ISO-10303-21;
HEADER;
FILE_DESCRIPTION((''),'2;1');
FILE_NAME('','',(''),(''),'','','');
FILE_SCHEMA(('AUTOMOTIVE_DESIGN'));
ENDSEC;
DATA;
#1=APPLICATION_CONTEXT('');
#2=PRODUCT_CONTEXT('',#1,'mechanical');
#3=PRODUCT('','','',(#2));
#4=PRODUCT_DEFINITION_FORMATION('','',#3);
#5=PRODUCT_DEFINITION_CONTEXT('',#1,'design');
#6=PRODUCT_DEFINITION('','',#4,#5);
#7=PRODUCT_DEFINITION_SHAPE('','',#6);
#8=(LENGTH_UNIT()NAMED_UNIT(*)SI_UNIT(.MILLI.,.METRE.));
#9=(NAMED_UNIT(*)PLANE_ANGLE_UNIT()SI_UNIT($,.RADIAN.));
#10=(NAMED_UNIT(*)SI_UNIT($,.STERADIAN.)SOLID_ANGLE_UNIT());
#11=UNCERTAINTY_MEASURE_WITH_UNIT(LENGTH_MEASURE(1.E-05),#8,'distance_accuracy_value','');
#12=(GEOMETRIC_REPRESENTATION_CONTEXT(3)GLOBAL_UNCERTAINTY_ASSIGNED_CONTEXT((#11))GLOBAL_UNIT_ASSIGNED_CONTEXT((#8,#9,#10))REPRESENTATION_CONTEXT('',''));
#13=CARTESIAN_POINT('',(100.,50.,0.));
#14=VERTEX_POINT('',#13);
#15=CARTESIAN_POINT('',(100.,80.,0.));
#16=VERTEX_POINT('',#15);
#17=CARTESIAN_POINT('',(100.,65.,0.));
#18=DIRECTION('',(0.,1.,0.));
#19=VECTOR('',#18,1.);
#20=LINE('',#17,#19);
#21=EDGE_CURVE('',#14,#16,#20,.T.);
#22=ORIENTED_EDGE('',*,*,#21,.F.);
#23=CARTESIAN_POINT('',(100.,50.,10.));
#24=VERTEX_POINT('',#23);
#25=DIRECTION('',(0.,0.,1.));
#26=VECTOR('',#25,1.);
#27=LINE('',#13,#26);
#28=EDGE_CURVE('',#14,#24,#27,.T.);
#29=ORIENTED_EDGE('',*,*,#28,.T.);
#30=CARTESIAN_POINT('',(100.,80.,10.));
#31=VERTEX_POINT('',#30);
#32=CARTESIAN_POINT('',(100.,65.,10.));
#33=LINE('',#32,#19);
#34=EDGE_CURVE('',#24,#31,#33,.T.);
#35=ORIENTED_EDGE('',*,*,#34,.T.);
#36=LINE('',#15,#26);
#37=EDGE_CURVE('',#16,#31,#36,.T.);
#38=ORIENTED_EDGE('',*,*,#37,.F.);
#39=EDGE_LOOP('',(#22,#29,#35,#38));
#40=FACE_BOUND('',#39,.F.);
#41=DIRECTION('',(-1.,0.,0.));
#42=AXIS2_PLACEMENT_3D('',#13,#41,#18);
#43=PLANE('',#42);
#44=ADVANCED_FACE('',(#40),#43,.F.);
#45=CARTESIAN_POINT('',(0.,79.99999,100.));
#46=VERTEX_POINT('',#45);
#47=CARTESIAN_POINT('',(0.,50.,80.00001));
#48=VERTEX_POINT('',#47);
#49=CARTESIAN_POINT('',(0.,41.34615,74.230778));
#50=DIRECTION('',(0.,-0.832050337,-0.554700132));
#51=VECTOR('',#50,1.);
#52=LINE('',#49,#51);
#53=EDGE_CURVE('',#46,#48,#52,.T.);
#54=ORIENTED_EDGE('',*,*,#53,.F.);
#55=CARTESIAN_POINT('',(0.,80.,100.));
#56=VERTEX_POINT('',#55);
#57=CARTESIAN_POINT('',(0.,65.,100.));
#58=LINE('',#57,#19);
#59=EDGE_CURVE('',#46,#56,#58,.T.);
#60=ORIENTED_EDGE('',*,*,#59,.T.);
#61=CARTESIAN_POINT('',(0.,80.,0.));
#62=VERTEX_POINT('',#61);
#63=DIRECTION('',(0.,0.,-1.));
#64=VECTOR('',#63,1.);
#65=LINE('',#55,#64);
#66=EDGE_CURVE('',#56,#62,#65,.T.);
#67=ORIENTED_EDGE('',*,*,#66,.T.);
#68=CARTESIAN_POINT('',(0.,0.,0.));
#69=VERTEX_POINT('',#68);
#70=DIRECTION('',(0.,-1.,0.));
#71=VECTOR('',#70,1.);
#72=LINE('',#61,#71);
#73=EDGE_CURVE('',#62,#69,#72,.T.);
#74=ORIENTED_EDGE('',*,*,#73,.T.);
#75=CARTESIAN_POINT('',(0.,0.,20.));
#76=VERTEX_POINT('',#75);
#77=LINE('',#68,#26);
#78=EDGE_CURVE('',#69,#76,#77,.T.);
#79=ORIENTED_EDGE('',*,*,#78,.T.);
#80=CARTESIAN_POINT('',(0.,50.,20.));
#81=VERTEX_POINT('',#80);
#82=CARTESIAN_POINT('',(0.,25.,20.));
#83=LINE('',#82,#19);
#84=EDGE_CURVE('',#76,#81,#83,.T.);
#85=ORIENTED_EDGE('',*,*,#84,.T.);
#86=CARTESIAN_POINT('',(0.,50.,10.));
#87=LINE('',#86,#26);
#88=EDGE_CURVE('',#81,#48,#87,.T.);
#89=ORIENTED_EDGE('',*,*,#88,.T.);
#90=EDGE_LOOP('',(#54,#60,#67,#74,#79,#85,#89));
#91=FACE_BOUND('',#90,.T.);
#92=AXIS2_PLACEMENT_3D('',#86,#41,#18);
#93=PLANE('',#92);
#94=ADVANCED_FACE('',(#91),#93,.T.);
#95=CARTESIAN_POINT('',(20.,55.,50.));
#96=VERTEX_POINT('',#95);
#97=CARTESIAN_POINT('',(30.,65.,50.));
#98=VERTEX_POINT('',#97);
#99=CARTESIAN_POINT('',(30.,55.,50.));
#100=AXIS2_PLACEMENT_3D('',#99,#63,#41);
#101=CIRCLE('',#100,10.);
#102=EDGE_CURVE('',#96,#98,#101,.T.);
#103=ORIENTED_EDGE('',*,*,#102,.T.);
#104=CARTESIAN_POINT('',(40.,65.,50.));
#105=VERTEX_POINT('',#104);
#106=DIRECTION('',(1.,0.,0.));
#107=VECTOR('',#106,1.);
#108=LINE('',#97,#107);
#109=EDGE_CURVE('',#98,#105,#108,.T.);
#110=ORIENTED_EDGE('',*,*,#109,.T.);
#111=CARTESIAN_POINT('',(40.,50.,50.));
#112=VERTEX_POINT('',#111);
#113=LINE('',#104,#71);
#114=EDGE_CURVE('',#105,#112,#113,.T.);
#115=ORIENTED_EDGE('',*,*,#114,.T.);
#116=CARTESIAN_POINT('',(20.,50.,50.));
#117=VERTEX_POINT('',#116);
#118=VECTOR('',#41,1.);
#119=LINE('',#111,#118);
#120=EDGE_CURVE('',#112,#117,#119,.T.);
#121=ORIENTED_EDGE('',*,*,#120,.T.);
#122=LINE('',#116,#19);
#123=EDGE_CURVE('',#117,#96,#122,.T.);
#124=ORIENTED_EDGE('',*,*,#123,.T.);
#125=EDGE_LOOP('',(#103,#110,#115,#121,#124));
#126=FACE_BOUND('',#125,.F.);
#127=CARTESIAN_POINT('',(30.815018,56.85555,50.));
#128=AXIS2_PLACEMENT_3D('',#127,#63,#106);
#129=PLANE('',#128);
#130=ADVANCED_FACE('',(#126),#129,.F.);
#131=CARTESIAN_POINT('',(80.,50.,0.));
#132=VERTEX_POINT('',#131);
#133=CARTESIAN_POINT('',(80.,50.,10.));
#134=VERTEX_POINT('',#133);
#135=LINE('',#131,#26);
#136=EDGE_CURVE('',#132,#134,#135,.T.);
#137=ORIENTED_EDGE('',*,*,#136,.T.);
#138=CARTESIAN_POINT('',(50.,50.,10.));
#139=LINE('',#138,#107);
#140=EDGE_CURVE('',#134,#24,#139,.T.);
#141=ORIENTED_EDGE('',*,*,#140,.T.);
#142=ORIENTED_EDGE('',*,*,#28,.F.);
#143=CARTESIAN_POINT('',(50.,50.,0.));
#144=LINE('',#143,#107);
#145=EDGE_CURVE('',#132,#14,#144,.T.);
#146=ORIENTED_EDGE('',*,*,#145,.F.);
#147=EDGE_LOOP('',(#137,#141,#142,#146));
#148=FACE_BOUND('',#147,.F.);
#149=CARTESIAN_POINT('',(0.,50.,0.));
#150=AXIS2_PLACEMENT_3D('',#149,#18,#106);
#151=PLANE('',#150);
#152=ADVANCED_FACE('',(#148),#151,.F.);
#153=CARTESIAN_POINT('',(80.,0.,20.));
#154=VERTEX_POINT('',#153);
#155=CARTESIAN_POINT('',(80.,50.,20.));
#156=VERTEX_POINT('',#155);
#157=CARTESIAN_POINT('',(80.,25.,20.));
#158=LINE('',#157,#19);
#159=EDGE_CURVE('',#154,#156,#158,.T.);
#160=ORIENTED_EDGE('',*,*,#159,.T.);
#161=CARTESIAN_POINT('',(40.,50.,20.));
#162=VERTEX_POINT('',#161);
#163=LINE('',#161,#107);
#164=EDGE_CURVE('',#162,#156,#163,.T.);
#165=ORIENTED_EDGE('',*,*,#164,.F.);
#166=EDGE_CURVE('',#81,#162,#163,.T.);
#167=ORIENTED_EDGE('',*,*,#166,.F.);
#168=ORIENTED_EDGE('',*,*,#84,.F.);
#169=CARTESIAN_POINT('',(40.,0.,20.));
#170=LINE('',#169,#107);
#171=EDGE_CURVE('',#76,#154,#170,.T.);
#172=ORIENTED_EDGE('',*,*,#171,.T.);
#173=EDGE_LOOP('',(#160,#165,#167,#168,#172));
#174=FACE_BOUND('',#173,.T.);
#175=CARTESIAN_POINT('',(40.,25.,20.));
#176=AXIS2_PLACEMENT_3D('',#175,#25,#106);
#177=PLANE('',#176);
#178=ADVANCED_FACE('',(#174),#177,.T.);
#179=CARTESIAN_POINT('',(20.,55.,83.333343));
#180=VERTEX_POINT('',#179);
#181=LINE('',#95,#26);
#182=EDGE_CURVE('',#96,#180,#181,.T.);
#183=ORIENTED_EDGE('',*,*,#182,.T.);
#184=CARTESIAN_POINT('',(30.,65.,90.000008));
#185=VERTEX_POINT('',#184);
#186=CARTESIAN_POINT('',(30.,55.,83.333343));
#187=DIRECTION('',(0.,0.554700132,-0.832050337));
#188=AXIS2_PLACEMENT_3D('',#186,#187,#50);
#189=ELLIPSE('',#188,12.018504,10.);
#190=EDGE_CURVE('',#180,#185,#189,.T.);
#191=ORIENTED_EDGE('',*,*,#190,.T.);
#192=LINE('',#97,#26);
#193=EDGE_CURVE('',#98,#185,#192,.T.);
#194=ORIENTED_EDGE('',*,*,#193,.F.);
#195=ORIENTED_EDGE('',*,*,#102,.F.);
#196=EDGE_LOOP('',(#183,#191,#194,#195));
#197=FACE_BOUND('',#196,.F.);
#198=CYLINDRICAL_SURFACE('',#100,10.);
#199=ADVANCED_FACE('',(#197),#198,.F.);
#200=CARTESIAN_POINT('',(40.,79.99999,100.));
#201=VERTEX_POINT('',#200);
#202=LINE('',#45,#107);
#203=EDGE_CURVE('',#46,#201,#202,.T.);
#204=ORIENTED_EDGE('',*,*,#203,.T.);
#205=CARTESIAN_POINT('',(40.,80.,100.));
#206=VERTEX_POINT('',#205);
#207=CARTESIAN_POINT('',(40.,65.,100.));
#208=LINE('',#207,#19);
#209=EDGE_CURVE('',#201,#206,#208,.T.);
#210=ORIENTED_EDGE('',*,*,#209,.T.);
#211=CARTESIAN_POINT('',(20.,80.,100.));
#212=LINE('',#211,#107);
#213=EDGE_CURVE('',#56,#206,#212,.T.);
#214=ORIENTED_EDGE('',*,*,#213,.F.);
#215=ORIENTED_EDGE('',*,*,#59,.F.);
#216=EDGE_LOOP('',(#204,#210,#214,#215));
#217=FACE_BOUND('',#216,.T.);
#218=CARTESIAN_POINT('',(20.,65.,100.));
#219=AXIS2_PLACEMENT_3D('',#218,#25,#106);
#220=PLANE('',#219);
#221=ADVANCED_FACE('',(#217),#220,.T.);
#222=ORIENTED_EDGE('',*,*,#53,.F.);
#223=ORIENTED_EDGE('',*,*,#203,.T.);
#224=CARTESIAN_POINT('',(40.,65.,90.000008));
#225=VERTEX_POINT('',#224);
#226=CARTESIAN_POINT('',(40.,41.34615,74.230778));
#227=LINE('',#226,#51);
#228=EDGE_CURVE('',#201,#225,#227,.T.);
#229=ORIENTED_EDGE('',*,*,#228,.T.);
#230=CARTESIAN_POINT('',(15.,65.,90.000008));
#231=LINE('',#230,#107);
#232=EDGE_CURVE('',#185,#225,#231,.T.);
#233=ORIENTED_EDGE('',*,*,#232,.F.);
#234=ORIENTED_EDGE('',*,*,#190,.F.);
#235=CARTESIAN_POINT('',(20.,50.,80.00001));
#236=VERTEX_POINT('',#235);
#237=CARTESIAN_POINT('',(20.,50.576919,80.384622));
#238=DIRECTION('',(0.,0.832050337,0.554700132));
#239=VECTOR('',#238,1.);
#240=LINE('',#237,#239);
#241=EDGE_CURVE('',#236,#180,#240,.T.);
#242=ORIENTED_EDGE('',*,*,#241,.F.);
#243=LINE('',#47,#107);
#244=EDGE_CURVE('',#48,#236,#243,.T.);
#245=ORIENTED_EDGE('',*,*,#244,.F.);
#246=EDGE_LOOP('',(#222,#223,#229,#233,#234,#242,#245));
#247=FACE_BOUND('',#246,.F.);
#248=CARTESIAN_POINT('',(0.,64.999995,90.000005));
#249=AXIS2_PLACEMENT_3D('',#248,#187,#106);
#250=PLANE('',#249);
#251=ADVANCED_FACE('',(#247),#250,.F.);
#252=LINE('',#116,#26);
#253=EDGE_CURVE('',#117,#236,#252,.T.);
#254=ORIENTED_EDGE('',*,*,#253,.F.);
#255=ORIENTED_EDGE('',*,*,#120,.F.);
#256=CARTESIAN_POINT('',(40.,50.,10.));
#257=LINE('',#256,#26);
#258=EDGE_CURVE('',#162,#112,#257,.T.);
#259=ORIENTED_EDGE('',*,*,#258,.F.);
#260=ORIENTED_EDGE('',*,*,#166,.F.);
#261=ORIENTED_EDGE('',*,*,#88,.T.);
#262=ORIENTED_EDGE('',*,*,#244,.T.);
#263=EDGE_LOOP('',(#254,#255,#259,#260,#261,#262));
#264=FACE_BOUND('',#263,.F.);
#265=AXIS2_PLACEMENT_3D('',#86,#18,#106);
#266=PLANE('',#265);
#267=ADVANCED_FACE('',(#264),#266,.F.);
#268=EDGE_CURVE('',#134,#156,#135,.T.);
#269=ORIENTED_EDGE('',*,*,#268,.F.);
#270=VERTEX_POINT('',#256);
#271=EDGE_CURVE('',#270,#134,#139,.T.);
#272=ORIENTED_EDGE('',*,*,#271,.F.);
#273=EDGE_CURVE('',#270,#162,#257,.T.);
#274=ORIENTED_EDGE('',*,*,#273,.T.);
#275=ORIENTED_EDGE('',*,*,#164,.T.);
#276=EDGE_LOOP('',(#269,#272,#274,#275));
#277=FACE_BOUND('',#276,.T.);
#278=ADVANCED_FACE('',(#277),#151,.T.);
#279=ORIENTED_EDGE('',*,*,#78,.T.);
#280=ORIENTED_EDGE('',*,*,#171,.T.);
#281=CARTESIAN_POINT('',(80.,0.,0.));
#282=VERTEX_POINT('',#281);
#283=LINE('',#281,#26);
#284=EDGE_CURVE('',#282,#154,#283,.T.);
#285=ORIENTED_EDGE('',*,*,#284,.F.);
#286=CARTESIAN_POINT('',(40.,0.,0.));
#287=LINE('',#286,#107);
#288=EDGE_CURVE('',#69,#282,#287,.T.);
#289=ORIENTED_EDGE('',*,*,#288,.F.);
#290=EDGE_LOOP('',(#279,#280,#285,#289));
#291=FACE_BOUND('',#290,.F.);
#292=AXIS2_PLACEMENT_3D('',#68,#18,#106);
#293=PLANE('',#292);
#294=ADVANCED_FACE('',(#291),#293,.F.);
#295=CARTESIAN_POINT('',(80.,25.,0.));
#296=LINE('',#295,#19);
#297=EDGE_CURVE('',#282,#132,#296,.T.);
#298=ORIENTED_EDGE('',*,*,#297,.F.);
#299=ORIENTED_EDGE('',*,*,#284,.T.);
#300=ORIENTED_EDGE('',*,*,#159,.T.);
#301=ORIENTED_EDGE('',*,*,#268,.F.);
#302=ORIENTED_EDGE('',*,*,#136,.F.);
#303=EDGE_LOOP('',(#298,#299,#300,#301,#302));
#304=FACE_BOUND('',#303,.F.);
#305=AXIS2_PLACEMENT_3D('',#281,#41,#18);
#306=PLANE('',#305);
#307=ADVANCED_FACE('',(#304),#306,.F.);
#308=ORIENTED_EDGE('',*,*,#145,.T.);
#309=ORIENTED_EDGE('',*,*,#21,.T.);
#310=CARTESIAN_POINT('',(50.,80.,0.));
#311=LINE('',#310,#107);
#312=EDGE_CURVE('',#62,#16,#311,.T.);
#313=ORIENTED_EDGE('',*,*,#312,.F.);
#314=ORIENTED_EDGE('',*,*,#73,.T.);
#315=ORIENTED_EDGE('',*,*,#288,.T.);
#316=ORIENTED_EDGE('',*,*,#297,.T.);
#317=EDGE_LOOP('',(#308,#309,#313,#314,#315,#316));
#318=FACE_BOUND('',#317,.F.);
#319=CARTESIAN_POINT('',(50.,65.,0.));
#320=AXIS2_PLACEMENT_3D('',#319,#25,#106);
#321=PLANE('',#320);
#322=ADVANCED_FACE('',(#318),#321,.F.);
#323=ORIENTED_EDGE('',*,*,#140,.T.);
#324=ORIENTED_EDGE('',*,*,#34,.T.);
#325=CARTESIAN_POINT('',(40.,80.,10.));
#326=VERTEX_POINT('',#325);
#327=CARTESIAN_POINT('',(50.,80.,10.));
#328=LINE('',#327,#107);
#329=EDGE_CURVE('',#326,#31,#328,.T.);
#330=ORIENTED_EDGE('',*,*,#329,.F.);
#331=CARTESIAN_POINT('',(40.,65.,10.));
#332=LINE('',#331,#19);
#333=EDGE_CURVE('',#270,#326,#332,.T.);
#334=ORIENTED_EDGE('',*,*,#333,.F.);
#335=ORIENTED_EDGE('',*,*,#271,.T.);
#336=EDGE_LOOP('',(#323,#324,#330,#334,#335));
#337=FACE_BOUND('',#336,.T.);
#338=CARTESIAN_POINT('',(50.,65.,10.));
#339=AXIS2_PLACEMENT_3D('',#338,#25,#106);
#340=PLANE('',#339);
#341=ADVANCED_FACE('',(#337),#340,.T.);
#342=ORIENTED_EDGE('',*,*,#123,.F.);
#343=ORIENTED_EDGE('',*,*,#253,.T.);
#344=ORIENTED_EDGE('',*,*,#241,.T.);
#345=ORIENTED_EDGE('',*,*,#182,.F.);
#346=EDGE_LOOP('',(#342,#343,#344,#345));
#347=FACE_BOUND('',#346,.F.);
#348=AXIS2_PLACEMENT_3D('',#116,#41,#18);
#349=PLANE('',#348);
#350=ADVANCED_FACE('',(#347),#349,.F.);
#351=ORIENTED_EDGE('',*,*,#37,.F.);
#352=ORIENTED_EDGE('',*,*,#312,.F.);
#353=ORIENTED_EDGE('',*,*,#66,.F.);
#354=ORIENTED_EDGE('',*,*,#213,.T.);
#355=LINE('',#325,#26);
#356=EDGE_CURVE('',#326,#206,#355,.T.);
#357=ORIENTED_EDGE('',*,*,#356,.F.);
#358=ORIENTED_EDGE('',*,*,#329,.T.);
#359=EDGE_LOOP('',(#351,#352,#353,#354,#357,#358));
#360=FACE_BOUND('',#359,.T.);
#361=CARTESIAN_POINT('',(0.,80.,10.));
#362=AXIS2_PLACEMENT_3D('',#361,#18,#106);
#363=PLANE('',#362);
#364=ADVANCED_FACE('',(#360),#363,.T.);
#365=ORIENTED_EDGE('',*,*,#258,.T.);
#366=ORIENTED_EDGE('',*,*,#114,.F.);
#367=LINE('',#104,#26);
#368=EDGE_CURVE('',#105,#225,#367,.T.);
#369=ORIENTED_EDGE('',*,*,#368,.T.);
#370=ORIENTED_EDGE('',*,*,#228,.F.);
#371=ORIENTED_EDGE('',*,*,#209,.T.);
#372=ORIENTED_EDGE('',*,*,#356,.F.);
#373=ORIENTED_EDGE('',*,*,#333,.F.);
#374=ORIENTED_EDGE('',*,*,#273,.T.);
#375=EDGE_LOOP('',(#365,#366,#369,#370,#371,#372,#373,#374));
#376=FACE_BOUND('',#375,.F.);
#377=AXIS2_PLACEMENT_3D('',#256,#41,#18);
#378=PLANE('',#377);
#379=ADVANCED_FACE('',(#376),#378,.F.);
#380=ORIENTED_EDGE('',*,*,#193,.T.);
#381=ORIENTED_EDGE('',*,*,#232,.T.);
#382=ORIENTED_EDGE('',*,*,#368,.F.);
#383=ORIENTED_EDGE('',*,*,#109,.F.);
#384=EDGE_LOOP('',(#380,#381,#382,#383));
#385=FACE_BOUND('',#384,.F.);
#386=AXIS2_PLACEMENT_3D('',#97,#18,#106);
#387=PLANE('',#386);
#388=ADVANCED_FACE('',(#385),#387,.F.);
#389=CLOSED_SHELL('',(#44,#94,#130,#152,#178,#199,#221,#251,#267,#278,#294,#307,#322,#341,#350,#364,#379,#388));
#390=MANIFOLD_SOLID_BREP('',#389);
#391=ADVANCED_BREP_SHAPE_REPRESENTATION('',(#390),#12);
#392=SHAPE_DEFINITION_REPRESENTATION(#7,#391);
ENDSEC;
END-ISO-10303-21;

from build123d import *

# Parameters (mm, degrees)
F0_W     = 80
F0_H     = 50
F1_DEPTH = 20
F2_W     = 100
F2_H     = 30
F3_DEPTH = 10
F4_W     = 40
F4_H     = 30
F5_DEPTH = 90
F6_SIZE2 = 19.99999
F6_SIZE  = 29.99999
F9_DEPTH = 50.001


# Not quite as in the source:
# - a fillet or chamfer is up to 0.001 mm smaller than in the source, because OpenCascade refuses the exact size


with BuildPart() as f1:
    # F0 (on Top) → F1 (new body)
    with BuildSketch(Plane.XY):
        with Locations((40, 25)):
            Rectangle(F0_W, F0_H)
    extrude(amount=F1_DEPTH)

    # F2 (on Top) → F3 (join)
    with BuildSketch(Plane.XY):
        with Locations((50, 65)):
            Rectangle(F2_W, F2_H)
    extrude(amount=F3_DEPTH)

    # F4 (on face) → F5 (join)
    with BuildSketch(Plane.XY.offset(10)):
        with Locations((20, 65)):
            Rectangle(F4_W, F4_H)
    extrude(amount=F5_DEPTH)

    # F6 (size 30 and 20 in the source; OpenCascade refuses exactly that, so slightly less here)
    f6_edges = [f1.edges().sort_by_distance(p)[0] for p in [
        (20, 50, 100),
    ]]
    f6_side = f1.faces().sort_by_distance((20, 65, 100))[0]
    chamfer(f6_edges, length=F6_SIZE, length2=F6_SIZE2, reference=f6_side)

    # F8 (on offset) → F9 (cut, through all)
    with BuildSketch(Plane(origin=(0, 0, 50), x_dir=(1, 0, 0), z_dir=(0, 0, -1))):
        with BuildLine():
            Line((30, -65), (40, -65))
            Line((40, -65), (40, -50))
            Line((40, -50), (20, -50))
            Line((20, -50), (20, -55))
            ThreePointArc((20, -55), (22.9289321881, -62.0710678119), (30, -65))
        make_face()
    extrude(amount=-F9_DEPTH, mode=Mode.SUBTRACT)


solid = f1.part
